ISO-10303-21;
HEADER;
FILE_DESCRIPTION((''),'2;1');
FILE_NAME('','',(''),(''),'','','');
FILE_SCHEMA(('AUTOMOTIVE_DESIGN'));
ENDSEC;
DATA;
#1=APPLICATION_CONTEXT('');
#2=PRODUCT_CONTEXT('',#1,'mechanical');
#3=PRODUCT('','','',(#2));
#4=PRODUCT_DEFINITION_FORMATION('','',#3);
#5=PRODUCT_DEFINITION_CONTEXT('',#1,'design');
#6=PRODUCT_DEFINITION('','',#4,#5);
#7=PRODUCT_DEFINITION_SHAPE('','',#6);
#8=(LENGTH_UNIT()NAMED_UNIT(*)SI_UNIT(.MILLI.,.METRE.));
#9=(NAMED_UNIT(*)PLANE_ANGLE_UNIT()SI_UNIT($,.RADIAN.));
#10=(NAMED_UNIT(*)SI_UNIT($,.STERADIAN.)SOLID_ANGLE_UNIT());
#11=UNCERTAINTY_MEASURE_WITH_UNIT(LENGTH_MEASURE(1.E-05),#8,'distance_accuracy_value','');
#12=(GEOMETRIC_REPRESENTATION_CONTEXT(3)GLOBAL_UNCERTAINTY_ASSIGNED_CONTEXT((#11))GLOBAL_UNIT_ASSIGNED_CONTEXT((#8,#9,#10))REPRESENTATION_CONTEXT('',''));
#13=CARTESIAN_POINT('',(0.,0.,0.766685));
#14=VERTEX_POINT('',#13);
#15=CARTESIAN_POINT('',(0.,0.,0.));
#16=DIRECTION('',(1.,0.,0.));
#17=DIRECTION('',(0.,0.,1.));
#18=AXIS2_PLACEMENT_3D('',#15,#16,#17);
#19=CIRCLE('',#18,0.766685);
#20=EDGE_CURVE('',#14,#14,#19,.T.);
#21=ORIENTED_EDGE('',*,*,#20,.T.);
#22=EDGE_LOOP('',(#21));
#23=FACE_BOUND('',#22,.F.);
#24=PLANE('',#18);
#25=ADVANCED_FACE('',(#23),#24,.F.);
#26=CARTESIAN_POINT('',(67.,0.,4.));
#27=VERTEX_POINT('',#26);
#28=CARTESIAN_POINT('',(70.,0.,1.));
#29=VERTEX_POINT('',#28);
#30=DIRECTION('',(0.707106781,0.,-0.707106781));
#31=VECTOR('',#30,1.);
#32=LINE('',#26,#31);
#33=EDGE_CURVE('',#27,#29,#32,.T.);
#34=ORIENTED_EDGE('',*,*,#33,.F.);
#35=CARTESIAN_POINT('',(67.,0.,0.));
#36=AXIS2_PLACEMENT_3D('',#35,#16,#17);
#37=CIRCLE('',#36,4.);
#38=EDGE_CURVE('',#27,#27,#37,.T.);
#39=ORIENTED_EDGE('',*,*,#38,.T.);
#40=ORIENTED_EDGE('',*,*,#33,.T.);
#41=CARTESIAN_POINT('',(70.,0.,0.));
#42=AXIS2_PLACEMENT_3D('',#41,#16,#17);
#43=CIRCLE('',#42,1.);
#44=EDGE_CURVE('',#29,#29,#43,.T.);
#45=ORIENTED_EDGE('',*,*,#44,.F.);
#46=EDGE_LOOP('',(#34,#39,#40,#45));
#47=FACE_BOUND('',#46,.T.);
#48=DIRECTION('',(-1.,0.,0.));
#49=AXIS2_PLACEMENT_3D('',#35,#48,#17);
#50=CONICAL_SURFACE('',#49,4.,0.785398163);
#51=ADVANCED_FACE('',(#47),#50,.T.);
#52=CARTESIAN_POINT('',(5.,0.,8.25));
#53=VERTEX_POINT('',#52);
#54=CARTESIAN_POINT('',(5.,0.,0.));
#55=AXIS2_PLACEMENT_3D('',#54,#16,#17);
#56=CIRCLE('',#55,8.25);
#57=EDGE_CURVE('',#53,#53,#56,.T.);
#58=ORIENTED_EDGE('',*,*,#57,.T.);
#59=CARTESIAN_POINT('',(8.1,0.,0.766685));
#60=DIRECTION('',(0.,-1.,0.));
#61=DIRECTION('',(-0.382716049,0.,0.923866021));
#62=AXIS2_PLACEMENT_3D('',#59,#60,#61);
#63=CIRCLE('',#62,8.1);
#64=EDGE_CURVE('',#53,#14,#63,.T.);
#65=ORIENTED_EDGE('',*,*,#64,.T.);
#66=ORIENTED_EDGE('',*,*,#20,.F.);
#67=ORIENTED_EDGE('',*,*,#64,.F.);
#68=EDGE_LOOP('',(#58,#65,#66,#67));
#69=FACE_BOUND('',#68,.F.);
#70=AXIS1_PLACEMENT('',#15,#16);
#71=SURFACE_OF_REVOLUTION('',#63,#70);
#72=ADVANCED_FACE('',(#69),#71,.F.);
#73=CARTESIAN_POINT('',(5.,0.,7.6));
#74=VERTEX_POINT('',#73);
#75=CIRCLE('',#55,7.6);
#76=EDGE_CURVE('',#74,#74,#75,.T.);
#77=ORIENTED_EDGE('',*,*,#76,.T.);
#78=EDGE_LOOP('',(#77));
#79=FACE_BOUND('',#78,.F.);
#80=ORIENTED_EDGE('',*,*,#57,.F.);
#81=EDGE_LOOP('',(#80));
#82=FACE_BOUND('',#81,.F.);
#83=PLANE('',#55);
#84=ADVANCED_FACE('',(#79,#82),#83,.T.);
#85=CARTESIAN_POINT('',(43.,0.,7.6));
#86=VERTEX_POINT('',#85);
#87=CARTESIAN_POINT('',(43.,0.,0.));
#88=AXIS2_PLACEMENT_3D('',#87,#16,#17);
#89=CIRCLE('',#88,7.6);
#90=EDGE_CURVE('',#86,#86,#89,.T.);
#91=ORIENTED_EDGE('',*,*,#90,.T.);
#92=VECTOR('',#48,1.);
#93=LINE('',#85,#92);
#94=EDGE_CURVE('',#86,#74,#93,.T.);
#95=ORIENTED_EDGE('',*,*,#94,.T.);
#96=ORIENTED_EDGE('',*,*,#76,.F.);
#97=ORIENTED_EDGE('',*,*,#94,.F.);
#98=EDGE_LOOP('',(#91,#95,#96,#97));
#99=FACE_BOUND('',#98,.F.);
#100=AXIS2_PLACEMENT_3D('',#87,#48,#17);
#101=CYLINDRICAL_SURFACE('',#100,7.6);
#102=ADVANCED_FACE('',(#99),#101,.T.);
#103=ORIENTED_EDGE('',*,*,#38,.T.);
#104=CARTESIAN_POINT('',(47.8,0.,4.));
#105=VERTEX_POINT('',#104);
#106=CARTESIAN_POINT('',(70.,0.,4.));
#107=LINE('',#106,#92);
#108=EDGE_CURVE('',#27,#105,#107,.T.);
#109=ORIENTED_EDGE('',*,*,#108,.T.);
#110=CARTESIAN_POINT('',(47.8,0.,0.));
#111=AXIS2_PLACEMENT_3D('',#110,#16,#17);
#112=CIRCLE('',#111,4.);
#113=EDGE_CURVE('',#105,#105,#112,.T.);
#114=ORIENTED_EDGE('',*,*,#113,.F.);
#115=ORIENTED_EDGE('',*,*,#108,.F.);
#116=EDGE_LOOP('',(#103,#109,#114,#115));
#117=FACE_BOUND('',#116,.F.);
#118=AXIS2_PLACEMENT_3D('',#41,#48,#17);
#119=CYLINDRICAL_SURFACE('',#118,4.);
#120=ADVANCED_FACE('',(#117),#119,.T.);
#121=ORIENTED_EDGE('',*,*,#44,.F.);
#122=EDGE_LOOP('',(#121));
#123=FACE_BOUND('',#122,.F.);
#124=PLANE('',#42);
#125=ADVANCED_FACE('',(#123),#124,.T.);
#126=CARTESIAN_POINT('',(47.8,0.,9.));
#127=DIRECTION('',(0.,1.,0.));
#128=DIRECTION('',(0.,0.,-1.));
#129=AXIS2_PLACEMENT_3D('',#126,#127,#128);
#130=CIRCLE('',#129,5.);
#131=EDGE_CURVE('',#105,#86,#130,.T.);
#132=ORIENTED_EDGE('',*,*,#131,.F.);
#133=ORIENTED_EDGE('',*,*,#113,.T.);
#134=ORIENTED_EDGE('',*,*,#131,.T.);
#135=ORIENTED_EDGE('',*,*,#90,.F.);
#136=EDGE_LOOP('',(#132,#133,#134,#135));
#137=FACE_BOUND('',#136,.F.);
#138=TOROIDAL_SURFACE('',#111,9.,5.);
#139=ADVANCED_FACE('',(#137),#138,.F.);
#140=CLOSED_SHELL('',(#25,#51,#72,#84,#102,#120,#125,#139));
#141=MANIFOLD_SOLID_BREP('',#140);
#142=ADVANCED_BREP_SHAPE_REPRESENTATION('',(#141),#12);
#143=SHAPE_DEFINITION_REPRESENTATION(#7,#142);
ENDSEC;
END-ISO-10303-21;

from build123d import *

# Parameters (mm, degrees)
F3_SIZE = 3


# Not quite as in the source:
# - a fillet or chamfer that OpenCascade refuses, or shapes differently, is made with other operations: its cross-section is extruded or revolved along the edge and cut away or added


with BuildPart() as f1:
    # F0 (on Front) → F1 (revolve)
    with BuildSketch(Plane.XZ):
        Polygon((0, 8.25), (0, 0), (70, 0), (70, 4), (43, 4), (43, 7.6), (5, 7.6), (5, 8.25), align=None)
    revolve(axis=Axis((35, 0, 0), (1, 0, 0)))

    # F2: fillet of radius 5 on 1 edges, made by hand

    # F2_s1 → F2_t2 (revolve)
    with BuildSketch(Plane.XZ):
        with BuildLine():
            ThreePointArc((47.8, 4), (44.8, 5), (43, 7.6))
            Line((43, 7.6), (43, 4))
            Line((43, 4), (47.8, 4))
        make_face()
    revolve(axis=Axis((43, 0, 0), (1, 0, 0)))

    # F3
    f3_edges = [f1.edges().sort_by_distance(p)[0] for p in [
        (70, 0, -4),
    ]]
    chamfer(f3_edges, length=F3_SIZE)

    # F4: fillet of radius 8.1 on 1 edges, made by hand

    # F4_s1 → F4_t2 (revolve, cut)
    with BuildSketch(Plane.XZ):
        with BuildLine():
            ThreePointArc((5, 8.25), (1.3650167038, 5.2666852265), (0, 0.7666852265))
            Line((0, 0.7666852265), (0, 8.25))
            Line((0, 8.25), (5, 8.25))
        make_face()
    revolve(axis=Axis((0, 0, 0), (1, 0, 0)), mode=Mode.SUBTRACT)


solid = f1.part
